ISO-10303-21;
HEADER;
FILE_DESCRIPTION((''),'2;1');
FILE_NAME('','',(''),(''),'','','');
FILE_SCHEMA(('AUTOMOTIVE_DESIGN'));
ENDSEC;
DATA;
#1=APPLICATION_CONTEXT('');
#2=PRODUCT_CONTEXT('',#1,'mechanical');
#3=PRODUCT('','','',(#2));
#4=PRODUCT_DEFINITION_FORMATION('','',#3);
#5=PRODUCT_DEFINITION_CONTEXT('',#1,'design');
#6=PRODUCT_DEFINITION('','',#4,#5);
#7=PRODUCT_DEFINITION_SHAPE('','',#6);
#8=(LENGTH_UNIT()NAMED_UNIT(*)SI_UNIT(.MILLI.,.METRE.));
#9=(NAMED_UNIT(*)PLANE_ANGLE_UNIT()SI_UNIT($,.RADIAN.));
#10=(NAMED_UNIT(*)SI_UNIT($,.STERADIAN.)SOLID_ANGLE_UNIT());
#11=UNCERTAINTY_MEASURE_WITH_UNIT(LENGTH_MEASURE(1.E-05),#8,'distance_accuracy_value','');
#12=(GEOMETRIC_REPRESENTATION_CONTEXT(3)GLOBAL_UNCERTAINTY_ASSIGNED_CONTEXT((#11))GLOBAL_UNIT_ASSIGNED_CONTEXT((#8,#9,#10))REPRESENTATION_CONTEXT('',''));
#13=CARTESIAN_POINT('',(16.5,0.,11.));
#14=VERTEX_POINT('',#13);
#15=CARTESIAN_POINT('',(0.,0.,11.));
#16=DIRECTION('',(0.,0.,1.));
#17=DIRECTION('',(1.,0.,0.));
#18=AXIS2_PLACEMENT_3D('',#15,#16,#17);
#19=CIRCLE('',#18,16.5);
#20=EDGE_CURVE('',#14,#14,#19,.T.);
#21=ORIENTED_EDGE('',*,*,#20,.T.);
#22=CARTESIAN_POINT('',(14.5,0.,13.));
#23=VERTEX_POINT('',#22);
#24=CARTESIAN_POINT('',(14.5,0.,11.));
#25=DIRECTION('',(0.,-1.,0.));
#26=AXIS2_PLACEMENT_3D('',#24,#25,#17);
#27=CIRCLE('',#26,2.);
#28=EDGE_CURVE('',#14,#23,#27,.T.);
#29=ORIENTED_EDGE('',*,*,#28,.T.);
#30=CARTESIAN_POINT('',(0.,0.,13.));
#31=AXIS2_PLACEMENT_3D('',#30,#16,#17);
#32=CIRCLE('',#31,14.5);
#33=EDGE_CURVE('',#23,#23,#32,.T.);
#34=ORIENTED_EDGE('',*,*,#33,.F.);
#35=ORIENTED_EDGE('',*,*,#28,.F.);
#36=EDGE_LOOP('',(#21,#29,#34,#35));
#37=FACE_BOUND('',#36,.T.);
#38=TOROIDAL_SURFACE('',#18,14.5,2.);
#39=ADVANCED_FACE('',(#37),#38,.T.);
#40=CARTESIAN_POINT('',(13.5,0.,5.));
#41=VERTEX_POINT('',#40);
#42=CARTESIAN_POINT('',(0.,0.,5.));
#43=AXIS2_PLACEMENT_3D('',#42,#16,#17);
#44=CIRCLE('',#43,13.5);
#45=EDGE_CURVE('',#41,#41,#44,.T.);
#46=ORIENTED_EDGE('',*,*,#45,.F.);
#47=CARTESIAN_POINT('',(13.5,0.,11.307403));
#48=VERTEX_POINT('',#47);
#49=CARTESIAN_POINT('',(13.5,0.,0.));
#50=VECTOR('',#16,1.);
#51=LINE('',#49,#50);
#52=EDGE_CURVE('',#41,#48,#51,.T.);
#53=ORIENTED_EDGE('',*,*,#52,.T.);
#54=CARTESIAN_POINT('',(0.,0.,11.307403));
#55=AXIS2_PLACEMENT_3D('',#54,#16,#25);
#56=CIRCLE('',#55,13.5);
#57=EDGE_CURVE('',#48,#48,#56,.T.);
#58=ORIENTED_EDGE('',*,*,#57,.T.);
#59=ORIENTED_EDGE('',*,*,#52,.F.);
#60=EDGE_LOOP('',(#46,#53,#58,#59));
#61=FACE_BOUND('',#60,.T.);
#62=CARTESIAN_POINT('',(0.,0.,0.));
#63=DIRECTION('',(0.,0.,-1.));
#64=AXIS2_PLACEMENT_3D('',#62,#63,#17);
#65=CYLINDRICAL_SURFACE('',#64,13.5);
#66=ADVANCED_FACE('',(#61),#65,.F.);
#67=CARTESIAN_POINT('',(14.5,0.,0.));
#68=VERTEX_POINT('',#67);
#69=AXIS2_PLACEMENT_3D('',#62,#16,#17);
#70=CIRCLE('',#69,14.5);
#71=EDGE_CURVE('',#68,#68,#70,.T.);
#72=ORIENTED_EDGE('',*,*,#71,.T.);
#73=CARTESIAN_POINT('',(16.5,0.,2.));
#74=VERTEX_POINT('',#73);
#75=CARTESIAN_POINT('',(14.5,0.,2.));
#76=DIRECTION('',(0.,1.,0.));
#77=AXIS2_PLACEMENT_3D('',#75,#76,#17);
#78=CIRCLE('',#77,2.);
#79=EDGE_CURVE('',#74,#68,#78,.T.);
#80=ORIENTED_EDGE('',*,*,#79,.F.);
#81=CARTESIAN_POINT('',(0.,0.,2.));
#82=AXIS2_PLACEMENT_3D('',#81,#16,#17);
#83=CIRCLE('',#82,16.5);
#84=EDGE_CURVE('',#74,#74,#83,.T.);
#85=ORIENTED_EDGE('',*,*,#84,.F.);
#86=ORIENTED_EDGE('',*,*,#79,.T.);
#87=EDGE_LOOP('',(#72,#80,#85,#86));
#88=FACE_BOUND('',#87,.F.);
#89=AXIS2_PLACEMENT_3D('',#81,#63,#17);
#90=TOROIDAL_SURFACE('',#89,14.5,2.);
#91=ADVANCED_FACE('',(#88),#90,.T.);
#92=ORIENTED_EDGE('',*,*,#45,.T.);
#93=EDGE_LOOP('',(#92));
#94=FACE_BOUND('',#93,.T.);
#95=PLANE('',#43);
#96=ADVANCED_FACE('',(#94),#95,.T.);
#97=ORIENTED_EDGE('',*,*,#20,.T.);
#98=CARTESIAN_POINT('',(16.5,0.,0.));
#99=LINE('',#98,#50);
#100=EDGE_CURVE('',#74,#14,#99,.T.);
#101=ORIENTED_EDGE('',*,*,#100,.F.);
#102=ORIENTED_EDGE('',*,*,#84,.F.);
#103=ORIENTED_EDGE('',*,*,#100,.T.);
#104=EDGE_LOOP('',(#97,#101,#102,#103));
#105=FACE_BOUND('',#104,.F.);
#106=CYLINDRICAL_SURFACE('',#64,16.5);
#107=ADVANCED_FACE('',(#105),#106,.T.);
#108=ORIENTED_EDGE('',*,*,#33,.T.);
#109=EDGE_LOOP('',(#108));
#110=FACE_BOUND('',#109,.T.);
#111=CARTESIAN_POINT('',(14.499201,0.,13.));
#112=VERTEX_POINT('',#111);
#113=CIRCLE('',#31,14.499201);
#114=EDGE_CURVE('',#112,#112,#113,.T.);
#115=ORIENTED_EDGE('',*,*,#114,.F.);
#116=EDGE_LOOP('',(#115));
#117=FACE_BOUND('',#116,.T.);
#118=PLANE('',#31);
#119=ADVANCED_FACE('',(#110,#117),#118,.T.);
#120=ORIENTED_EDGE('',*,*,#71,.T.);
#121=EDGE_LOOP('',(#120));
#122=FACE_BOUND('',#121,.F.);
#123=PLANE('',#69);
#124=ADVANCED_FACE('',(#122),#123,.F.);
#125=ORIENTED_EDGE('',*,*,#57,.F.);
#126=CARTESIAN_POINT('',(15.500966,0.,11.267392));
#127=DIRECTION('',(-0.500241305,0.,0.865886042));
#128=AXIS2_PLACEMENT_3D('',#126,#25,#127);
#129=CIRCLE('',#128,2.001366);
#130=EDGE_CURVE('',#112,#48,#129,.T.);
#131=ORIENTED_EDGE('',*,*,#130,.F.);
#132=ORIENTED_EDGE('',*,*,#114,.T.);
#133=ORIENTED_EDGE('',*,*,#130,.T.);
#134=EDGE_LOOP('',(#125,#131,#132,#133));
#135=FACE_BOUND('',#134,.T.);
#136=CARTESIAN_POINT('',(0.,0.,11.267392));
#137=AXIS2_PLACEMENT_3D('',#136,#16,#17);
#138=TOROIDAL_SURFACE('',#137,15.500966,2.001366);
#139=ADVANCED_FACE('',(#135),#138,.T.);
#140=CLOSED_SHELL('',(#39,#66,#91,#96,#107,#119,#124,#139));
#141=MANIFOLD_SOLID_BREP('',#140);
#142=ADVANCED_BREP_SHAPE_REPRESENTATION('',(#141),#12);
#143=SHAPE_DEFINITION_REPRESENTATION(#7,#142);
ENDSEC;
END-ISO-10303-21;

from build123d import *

# Parameters (mm, degrees)
F0_R     = 13.5
F1_DEPTH = 5
F0_R_2   = 16.5
F2_DEPTH = 13
F3_R     = 2


# Not quite as in the source:
# - a fillet or chamfer that OpenCascade refuses, or shapes differently, is made with other operations: its cross-section is extruded or revolved along the edge and cut away or added


with BuildPart() as f1:
    # F0 (on Top) → F1 (new body)
    with BuildSketch(Plane.XY):
        Circle(F0_R)
    extrude(amount=F1_DEPTH)

    # F0 (on Top) → F2 (join)
    with BuildSketch(Plane.XY):
        Circle(F0_R_2)
        Circle(F0_R, mode=Mode.SUBTRACT)
    extrude(amount=F2_DEPTH)

    # F3
    f3_edges = [f1.edges().sort_by_distance(p)[0] for p in [
        (-16.5, 0, 13),
        (-16.5, 0, 0),
    ]]
    fillet(f3_edges, radius=F3_R)

    # F4: fillet of radius 2 on 1 edges, made by hand

    # F4_s1 → F4_t2 (revolve, cut)
    with BuildSketch(Plane.XZ):
        with BuildLine():
            ThreePointArc((14.4997999035, 13.0003463544), (13.7675927526, 12.2678330874), (13.4996, 11.2673917434))
            Line((13.4996, 11.2673917434), (13.2994634315, 11.2673917434))
            ThreePointArc((13.2994634315, 11.2673917434), (13.2998634315, 12.1336958717), (13.2998634315, 13))
            Line((13.2998634315, 13), (13.5, 13.2001365685))
            ThreePointArc((13.5, 13.2001365685), (13.9998999517, 13.2001365685), (14.3996833253, 13.1736418155))
            Line((14.3996833253, 13.1736418155), (14.4997999035, 13.0003463544))
        make_face()
    revolve(axis=Axis((0, 0, 13), (0, 0, 1)), mode=Mode.SUBTRACT)


with BuildPart() as f5_1:
    # F5: copy of F1
    add(f1.part)


with BuildPart() as f7_1:
    # F7: copy of F1
    add(f1.part.moved(Location((0, 36, 0))))


with BuildPart() as f8_1:
    # F8: copy of F1
    add(f1.part.moved(Location((36.3, 0, 0))))


with BuildPart() as f9_1:
    # F9: copy of F8_1
    add(f8_1.part.moved(Location((-0.4, 35.2, 0))))


solid = f1.part
